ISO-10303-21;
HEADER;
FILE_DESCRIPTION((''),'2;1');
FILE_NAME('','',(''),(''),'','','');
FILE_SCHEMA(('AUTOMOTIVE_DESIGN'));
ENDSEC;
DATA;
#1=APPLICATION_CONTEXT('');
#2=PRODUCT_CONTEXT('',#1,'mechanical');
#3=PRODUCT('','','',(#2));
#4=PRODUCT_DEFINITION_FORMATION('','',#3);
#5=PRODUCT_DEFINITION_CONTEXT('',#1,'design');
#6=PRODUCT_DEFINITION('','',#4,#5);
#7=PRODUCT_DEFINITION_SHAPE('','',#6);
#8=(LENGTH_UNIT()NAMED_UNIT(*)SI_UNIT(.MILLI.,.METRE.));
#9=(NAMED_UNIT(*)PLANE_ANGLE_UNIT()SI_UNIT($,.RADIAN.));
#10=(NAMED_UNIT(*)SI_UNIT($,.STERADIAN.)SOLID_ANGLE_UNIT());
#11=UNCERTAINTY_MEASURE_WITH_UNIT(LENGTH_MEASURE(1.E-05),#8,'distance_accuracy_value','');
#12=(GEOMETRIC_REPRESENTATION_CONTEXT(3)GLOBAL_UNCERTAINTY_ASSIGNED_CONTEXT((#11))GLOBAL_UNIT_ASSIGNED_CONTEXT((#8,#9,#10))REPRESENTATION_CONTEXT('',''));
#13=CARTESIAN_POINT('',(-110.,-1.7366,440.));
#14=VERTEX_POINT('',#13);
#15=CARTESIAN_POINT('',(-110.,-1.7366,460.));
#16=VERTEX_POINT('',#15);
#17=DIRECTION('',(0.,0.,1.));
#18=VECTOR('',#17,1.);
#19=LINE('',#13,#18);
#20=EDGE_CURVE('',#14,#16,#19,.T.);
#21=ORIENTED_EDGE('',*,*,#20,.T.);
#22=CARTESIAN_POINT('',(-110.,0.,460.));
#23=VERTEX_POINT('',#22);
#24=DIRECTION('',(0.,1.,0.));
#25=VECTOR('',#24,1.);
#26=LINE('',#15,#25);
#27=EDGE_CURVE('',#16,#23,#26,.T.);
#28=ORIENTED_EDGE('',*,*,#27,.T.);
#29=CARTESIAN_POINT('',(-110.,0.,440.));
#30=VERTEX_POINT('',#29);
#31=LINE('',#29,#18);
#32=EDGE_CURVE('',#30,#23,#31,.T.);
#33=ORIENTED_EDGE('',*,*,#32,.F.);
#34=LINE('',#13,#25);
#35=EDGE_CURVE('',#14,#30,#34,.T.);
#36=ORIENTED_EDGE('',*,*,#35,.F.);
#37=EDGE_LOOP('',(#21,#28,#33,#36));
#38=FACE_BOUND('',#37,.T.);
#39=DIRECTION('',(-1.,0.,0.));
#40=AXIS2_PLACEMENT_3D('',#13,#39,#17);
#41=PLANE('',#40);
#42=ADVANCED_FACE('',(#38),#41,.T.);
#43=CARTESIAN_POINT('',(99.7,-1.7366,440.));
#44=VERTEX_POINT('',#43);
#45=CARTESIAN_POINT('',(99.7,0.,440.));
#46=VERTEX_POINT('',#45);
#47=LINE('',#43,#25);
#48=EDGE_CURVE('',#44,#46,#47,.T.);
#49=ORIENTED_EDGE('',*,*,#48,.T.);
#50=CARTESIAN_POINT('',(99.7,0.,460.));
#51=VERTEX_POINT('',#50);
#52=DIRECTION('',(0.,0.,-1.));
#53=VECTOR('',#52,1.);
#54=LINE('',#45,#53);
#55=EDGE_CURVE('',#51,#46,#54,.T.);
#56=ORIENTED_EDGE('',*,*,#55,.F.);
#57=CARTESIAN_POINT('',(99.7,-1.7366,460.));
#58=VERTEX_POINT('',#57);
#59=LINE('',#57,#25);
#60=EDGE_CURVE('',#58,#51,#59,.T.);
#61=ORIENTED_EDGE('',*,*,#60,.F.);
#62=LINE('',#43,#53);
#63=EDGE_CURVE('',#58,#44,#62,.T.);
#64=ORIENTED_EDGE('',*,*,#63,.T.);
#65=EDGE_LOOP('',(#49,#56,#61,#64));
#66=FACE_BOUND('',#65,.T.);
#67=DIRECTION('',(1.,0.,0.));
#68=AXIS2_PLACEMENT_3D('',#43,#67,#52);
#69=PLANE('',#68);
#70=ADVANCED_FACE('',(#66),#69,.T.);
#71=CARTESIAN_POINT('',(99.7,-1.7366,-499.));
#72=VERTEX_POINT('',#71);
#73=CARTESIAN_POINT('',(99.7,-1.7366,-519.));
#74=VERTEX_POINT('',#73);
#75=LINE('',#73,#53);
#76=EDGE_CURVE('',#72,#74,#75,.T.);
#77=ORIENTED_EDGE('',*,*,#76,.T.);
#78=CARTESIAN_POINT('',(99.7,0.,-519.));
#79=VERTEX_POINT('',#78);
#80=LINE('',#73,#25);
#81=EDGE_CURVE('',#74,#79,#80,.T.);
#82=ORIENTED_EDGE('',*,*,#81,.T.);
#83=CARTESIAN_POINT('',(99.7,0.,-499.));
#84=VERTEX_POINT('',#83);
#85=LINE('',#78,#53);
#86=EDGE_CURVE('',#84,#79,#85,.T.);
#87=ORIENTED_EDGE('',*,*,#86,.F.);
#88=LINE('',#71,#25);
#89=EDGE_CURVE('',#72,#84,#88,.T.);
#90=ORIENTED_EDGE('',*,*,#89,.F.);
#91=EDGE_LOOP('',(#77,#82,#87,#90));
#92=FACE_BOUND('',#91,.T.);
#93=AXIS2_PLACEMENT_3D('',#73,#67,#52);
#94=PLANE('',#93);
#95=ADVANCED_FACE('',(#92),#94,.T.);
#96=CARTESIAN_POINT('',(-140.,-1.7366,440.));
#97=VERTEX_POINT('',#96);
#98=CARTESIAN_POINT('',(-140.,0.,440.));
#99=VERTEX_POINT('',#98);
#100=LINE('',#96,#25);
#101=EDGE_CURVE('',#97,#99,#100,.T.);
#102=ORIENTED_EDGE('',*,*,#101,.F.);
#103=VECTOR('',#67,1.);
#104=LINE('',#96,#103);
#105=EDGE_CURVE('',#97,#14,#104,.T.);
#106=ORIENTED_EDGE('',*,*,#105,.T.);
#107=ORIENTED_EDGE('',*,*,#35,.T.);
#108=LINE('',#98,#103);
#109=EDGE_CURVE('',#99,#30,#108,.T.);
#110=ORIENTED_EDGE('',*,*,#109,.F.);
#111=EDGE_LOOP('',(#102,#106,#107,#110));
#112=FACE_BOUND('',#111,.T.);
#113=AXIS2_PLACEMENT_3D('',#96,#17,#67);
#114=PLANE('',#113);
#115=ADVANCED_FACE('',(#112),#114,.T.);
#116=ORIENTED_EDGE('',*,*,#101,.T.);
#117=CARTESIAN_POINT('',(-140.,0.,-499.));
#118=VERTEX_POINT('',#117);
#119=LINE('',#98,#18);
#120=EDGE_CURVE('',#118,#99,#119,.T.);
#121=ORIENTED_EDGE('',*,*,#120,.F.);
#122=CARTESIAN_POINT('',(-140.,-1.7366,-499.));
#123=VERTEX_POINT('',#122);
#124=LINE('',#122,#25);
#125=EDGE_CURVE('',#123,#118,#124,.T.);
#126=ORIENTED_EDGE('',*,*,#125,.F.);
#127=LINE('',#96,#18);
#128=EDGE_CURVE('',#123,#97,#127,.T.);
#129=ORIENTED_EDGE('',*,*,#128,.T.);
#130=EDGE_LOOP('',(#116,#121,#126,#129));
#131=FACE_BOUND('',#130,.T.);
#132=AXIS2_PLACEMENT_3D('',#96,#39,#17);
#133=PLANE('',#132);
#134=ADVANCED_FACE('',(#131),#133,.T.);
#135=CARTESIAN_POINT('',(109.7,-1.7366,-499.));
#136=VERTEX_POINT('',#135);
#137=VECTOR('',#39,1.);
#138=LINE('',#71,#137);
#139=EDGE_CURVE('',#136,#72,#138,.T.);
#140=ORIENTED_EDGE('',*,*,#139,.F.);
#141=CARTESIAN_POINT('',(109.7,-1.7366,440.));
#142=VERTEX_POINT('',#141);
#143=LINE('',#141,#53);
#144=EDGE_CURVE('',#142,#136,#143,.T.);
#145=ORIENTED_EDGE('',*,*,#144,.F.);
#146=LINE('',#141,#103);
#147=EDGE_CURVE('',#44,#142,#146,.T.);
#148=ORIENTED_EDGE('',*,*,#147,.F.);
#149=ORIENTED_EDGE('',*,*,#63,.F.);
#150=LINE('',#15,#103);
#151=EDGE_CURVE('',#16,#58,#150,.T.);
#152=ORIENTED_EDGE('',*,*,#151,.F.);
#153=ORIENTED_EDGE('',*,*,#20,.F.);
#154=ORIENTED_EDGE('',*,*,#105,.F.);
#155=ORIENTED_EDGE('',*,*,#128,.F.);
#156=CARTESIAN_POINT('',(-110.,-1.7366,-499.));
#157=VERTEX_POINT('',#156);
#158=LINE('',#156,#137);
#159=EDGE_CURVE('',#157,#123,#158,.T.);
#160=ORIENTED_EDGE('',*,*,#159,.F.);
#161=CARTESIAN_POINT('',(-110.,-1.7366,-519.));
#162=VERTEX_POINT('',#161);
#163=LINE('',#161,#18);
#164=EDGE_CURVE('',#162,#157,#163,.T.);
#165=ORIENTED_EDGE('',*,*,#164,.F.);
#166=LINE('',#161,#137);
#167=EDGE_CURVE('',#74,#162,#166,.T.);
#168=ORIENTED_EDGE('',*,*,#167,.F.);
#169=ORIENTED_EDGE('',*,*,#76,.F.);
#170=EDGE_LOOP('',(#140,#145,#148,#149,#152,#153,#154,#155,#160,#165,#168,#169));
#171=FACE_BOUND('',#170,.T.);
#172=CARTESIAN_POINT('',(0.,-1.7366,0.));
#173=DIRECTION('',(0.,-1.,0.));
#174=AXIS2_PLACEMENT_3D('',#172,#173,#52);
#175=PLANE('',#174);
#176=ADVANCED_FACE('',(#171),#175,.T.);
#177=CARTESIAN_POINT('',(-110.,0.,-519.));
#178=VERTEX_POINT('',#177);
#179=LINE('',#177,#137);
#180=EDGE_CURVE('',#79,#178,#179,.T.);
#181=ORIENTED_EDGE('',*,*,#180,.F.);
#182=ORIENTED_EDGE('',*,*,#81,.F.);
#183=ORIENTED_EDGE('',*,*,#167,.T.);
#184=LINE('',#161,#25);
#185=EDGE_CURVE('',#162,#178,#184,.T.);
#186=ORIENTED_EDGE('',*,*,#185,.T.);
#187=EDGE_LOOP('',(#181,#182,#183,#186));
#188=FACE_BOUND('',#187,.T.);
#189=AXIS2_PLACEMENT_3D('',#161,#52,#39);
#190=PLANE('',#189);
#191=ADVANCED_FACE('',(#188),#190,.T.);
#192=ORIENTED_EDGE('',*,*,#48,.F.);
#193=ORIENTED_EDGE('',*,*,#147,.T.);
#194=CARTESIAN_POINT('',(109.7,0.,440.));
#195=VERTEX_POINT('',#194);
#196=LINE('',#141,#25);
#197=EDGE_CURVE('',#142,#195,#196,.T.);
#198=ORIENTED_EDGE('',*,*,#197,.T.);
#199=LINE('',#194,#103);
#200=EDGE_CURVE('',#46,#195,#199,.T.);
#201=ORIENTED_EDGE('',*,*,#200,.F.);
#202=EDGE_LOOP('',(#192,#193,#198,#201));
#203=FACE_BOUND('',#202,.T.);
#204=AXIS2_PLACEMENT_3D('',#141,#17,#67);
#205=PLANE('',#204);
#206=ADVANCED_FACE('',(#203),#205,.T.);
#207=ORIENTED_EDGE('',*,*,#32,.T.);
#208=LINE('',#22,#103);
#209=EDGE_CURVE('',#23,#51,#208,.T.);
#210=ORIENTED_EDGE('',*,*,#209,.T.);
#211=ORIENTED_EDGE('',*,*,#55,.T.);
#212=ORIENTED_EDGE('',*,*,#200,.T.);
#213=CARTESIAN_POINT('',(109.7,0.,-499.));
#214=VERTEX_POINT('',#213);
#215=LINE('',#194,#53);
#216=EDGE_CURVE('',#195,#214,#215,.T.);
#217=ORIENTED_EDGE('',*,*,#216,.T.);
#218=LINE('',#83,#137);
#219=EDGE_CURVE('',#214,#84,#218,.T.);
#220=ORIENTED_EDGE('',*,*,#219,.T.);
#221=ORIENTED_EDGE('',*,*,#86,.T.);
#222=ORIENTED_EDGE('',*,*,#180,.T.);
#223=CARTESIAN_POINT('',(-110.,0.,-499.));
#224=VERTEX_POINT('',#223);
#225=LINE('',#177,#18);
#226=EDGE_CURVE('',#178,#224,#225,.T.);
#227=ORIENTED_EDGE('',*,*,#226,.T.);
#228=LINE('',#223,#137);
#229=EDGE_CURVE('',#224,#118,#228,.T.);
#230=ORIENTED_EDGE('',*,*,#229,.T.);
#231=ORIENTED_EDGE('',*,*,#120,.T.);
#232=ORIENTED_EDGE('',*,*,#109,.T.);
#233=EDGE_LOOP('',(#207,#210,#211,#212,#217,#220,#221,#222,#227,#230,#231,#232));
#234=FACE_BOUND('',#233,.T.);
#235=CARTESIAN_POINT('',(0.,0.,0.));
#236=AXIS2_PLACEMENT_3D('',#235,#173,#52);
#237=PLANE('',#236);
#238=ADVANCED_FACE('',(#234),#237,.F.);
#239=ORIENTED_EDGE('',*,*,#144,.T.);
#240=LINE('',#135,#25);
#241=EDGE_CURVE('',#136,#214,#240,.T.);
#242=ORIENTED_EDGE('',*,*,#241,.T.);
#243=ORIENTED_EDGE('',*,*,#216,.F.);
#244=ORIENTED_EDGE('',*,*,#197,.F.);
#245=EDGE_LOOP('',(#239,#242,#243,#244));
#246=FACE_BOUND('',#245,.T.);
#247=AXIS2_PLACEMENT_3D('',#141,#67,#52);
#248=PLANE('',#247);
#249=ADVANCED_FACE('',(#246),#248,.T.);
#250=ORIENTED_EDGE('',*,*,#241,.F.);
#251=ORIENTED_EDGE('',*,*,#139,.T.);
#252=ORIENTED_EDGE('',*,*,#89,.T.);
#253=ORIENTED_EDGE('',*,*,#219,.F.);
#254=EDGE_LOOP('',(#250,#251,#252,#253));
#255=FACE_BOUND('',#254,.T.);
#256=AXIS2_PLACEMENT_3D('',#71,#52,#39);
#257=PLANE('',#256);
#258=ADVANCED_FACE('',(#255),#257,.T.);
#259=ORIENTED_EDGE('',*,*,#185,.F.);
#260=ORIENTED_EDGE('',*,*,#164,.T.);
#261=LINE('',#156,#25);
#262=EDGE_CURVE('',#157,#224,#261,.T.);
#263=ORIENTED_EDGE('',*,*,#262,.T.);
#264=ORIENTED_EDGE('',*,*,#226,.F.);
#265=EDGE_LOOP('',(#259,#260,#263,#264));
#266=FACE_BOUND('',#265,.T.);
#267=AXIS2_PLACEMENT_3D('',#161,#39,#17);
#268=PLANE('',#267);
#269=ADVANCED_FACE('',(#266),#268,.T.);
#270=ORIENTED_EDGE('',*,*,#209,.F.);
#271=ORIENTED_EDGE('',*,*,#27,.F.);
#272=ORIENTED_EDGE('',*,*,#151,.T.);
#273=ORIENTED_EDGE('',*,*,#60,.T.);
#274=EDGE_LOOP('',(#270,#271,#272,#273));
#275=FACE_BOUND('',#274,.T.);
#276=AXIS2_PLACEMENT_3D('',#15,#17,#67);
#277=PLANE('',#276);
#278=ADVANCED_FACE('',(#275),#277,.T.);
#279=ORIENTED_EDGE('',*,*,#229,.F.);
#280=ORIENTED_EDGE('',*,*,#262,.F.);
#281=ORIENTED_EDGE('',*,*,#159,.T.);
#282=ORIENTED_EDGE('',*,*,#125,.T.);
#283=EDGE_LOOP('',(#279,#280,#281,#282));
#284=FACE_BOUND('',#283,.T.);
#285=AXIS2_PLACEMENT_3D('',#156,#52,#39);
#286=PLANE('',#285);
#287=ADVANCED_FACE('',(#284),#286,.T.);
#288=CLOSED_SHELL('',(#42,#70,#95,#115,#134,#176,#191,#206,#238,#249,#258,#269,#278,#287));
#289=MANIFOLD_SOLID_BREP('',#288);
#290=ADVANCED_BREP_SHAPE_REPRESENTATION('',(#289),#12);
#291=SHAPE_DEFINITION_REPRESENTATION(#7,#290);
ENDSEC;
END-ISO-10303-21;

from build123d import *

# Parameters (mm, degrees)
BASE_FLANGE1_DEPTH = 1.7366


# Sheet-metal steps are written as plain solids
with BuildPart() as part:
    # Sketch1 → Base-Flange1 (new body)
    with BuildSketch(Plane(origin=(0, 0, 0), x_dir=(1, 0, 0), z_dir=(0, 1, 0))):
        Polygon((-110, 519), (-110, 499), (-140, 499), (-140, -440), (-110, -440), (-110, -460), (99.7, -460), (99.7, -440), (109.7, -440), (109.7, 499), (99.7, 499), (99.7, 519), align=None)
    extrude(amount=-BASE_FLANGE1_DEPTH)


solid = part.part
